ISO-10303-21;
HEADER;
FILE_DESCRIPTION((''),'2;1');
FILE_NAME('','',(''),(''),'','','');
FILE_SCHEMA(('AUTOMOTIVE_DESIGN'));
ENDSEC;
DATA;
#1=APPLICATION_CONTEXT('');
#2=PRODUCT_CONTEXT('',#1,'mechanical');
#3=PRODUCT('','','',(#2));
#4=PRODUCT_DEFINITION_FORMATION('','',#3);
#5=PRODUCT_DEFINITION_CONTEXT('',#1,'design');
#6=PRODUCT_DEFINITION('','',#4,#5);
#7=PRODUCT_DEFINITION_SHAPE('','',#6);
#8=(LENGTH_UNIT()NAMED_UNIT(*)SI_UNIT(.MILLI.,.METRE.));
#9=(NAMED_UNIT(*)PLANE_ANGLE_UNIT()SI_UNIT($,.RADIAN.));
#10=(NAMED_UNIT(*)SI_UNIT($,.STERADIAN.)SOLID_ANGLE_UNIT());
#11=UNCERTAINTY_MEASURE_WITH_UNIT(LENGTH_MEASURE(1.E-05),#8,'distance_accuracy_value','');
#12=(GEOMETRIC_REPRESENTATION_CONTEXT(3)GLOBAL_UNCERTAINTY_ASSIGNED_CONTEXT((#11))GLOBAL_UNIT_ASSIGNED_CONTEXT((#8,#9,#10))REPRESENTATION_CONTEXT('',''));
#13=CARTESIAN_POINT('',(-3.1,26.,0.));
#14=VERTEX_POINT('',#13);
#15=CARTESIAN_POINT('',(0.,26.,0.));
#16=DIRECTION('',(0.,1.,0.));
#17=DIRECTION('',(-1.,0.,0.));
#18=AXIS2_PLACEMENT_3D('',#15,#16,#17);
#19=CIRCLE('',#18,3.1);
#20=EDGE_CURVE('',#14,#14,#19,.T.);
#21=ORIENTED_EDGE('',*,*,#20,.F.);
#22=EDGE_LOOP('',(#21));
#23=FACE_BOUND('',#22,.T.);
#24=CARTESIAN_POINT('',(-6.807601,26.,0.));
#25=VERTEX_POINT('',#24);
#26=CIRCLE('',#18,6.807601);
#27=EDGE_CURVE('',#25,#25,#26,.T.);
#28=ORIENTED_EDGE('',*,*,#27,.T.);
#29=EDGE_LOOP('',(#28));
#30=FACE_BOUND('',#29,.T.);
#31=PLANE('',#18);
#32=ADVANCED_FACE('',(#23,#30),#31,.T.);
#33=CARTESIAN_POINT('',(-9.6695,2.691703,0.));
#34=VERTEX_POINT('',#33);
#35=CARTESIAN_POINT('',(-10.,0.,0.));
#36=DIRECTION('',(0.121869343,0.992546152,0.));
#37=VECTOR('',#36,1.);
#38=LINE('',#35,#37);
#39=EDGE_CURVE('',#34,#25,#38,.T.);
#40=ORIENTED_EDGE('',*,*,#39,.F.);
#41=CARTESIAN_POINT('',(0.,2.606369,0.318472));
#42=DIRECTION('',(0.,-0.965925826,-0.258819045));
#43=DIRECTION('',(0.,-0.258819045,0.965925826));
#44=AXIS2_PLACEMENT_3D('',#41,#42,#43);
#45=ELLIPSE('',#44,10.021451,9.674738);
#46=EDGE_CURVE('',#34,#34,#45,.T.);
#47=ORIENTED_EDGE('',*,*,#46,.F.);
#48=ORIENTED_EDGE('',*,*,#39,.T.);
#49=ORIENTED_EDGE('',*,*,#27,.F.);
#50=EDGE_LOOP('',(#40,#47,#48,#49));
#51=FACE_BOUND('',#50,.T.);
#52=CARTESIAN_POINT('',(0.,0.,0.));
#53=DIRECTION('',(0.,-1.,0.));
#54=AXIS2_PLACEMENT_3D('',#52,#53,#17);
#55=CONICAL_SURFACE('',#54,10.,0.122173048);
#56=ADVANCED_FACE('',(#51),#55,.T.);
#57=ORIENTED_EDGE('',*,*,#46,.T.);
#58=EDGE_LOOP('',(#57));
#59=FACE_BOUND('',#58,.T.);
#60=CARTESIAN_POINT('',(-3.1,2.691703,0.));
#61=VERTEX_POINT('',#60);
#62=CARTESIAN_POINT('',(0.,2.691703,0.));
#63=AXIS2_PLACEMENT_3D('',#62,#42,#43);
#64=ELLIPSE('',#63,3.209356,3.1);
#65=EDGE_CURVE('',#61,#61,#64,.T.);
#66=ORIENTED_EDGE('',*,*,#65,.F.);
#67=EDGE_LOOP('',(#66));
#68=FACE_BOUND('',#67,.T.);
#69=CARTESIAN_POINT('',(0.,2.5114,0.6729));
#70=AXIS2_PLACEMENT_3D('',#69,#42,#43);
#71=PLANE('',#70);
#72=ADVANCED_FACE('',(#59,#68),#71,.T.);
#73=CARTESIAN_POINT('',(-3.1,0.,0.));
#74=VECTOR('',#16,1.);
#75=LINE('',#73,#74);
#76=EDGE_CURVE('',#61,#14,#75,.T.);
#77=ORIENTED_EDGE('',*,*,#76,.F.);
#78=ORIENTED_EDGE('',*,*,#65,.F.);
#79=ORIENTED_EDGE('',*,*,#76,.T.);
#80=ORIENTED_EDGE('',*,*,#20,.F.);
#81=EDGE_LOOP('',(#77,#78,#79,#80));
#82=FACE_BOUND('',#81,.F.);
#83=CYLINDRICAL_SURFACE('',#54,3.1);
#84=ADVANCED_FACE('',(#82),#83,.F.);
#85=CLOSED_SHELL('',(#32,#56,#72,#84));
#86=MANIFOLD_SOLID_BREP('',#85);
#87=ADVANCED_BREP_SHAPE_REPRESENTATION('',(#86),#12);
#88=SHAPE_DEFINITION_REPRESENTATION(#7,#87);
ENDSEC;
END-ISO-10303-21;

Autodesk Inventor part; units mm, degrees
ref_plane "YZ Plane" through (0, 0, 0) normal (1, 0, 0) x (0, 1, 0)
ref_plane "XZ Plane" through (0, 0, 0) normal (0, 1, 0) x (-1, 0, 0)
sketch "Sketch1" plane through (0, 0, 0) normal (0, 1, 0) x (-1, 0, 0)
  circle A0 centre (0, 0) radius 10
  circle A1 centre (0, 0) radius 3.1
  dimension "d0" = 20
  dimension "d1" = 6.2
extrude "Extrusion1" add sketch "Sketch1" along normal blind 26
ref_plane "Work Plane3" through (0, 2.5114, 0.6729) normal (0, -0.9659258, -0.258819) x (1, 0, 0)
ref_plane "Work Plane2" through (0, 0, 0) normal (0, -0.9659258, -0.258819) x (1, 0, 0)
draft "FaceDraft1" angle 7 pull direction (0, 1, 0) faces at (-9.8705, 17.3333, -1.6041) fixed edges at (10, 0, 0)
sketch "Sketch2" plane through (0, 26, 0) normal (0, 1, 0) x (1, 0, 0)
  point P0 (0, 0)
split "Split1" plane through (0, 2.5114, 0.6729) removes the side toward (0, -0.9659258, -0.258819)
ref_plane "Work Plane1" through (0, 0, 0) normal (0, -1, 0) x (1, 0, 0)
properties part number "cone"
